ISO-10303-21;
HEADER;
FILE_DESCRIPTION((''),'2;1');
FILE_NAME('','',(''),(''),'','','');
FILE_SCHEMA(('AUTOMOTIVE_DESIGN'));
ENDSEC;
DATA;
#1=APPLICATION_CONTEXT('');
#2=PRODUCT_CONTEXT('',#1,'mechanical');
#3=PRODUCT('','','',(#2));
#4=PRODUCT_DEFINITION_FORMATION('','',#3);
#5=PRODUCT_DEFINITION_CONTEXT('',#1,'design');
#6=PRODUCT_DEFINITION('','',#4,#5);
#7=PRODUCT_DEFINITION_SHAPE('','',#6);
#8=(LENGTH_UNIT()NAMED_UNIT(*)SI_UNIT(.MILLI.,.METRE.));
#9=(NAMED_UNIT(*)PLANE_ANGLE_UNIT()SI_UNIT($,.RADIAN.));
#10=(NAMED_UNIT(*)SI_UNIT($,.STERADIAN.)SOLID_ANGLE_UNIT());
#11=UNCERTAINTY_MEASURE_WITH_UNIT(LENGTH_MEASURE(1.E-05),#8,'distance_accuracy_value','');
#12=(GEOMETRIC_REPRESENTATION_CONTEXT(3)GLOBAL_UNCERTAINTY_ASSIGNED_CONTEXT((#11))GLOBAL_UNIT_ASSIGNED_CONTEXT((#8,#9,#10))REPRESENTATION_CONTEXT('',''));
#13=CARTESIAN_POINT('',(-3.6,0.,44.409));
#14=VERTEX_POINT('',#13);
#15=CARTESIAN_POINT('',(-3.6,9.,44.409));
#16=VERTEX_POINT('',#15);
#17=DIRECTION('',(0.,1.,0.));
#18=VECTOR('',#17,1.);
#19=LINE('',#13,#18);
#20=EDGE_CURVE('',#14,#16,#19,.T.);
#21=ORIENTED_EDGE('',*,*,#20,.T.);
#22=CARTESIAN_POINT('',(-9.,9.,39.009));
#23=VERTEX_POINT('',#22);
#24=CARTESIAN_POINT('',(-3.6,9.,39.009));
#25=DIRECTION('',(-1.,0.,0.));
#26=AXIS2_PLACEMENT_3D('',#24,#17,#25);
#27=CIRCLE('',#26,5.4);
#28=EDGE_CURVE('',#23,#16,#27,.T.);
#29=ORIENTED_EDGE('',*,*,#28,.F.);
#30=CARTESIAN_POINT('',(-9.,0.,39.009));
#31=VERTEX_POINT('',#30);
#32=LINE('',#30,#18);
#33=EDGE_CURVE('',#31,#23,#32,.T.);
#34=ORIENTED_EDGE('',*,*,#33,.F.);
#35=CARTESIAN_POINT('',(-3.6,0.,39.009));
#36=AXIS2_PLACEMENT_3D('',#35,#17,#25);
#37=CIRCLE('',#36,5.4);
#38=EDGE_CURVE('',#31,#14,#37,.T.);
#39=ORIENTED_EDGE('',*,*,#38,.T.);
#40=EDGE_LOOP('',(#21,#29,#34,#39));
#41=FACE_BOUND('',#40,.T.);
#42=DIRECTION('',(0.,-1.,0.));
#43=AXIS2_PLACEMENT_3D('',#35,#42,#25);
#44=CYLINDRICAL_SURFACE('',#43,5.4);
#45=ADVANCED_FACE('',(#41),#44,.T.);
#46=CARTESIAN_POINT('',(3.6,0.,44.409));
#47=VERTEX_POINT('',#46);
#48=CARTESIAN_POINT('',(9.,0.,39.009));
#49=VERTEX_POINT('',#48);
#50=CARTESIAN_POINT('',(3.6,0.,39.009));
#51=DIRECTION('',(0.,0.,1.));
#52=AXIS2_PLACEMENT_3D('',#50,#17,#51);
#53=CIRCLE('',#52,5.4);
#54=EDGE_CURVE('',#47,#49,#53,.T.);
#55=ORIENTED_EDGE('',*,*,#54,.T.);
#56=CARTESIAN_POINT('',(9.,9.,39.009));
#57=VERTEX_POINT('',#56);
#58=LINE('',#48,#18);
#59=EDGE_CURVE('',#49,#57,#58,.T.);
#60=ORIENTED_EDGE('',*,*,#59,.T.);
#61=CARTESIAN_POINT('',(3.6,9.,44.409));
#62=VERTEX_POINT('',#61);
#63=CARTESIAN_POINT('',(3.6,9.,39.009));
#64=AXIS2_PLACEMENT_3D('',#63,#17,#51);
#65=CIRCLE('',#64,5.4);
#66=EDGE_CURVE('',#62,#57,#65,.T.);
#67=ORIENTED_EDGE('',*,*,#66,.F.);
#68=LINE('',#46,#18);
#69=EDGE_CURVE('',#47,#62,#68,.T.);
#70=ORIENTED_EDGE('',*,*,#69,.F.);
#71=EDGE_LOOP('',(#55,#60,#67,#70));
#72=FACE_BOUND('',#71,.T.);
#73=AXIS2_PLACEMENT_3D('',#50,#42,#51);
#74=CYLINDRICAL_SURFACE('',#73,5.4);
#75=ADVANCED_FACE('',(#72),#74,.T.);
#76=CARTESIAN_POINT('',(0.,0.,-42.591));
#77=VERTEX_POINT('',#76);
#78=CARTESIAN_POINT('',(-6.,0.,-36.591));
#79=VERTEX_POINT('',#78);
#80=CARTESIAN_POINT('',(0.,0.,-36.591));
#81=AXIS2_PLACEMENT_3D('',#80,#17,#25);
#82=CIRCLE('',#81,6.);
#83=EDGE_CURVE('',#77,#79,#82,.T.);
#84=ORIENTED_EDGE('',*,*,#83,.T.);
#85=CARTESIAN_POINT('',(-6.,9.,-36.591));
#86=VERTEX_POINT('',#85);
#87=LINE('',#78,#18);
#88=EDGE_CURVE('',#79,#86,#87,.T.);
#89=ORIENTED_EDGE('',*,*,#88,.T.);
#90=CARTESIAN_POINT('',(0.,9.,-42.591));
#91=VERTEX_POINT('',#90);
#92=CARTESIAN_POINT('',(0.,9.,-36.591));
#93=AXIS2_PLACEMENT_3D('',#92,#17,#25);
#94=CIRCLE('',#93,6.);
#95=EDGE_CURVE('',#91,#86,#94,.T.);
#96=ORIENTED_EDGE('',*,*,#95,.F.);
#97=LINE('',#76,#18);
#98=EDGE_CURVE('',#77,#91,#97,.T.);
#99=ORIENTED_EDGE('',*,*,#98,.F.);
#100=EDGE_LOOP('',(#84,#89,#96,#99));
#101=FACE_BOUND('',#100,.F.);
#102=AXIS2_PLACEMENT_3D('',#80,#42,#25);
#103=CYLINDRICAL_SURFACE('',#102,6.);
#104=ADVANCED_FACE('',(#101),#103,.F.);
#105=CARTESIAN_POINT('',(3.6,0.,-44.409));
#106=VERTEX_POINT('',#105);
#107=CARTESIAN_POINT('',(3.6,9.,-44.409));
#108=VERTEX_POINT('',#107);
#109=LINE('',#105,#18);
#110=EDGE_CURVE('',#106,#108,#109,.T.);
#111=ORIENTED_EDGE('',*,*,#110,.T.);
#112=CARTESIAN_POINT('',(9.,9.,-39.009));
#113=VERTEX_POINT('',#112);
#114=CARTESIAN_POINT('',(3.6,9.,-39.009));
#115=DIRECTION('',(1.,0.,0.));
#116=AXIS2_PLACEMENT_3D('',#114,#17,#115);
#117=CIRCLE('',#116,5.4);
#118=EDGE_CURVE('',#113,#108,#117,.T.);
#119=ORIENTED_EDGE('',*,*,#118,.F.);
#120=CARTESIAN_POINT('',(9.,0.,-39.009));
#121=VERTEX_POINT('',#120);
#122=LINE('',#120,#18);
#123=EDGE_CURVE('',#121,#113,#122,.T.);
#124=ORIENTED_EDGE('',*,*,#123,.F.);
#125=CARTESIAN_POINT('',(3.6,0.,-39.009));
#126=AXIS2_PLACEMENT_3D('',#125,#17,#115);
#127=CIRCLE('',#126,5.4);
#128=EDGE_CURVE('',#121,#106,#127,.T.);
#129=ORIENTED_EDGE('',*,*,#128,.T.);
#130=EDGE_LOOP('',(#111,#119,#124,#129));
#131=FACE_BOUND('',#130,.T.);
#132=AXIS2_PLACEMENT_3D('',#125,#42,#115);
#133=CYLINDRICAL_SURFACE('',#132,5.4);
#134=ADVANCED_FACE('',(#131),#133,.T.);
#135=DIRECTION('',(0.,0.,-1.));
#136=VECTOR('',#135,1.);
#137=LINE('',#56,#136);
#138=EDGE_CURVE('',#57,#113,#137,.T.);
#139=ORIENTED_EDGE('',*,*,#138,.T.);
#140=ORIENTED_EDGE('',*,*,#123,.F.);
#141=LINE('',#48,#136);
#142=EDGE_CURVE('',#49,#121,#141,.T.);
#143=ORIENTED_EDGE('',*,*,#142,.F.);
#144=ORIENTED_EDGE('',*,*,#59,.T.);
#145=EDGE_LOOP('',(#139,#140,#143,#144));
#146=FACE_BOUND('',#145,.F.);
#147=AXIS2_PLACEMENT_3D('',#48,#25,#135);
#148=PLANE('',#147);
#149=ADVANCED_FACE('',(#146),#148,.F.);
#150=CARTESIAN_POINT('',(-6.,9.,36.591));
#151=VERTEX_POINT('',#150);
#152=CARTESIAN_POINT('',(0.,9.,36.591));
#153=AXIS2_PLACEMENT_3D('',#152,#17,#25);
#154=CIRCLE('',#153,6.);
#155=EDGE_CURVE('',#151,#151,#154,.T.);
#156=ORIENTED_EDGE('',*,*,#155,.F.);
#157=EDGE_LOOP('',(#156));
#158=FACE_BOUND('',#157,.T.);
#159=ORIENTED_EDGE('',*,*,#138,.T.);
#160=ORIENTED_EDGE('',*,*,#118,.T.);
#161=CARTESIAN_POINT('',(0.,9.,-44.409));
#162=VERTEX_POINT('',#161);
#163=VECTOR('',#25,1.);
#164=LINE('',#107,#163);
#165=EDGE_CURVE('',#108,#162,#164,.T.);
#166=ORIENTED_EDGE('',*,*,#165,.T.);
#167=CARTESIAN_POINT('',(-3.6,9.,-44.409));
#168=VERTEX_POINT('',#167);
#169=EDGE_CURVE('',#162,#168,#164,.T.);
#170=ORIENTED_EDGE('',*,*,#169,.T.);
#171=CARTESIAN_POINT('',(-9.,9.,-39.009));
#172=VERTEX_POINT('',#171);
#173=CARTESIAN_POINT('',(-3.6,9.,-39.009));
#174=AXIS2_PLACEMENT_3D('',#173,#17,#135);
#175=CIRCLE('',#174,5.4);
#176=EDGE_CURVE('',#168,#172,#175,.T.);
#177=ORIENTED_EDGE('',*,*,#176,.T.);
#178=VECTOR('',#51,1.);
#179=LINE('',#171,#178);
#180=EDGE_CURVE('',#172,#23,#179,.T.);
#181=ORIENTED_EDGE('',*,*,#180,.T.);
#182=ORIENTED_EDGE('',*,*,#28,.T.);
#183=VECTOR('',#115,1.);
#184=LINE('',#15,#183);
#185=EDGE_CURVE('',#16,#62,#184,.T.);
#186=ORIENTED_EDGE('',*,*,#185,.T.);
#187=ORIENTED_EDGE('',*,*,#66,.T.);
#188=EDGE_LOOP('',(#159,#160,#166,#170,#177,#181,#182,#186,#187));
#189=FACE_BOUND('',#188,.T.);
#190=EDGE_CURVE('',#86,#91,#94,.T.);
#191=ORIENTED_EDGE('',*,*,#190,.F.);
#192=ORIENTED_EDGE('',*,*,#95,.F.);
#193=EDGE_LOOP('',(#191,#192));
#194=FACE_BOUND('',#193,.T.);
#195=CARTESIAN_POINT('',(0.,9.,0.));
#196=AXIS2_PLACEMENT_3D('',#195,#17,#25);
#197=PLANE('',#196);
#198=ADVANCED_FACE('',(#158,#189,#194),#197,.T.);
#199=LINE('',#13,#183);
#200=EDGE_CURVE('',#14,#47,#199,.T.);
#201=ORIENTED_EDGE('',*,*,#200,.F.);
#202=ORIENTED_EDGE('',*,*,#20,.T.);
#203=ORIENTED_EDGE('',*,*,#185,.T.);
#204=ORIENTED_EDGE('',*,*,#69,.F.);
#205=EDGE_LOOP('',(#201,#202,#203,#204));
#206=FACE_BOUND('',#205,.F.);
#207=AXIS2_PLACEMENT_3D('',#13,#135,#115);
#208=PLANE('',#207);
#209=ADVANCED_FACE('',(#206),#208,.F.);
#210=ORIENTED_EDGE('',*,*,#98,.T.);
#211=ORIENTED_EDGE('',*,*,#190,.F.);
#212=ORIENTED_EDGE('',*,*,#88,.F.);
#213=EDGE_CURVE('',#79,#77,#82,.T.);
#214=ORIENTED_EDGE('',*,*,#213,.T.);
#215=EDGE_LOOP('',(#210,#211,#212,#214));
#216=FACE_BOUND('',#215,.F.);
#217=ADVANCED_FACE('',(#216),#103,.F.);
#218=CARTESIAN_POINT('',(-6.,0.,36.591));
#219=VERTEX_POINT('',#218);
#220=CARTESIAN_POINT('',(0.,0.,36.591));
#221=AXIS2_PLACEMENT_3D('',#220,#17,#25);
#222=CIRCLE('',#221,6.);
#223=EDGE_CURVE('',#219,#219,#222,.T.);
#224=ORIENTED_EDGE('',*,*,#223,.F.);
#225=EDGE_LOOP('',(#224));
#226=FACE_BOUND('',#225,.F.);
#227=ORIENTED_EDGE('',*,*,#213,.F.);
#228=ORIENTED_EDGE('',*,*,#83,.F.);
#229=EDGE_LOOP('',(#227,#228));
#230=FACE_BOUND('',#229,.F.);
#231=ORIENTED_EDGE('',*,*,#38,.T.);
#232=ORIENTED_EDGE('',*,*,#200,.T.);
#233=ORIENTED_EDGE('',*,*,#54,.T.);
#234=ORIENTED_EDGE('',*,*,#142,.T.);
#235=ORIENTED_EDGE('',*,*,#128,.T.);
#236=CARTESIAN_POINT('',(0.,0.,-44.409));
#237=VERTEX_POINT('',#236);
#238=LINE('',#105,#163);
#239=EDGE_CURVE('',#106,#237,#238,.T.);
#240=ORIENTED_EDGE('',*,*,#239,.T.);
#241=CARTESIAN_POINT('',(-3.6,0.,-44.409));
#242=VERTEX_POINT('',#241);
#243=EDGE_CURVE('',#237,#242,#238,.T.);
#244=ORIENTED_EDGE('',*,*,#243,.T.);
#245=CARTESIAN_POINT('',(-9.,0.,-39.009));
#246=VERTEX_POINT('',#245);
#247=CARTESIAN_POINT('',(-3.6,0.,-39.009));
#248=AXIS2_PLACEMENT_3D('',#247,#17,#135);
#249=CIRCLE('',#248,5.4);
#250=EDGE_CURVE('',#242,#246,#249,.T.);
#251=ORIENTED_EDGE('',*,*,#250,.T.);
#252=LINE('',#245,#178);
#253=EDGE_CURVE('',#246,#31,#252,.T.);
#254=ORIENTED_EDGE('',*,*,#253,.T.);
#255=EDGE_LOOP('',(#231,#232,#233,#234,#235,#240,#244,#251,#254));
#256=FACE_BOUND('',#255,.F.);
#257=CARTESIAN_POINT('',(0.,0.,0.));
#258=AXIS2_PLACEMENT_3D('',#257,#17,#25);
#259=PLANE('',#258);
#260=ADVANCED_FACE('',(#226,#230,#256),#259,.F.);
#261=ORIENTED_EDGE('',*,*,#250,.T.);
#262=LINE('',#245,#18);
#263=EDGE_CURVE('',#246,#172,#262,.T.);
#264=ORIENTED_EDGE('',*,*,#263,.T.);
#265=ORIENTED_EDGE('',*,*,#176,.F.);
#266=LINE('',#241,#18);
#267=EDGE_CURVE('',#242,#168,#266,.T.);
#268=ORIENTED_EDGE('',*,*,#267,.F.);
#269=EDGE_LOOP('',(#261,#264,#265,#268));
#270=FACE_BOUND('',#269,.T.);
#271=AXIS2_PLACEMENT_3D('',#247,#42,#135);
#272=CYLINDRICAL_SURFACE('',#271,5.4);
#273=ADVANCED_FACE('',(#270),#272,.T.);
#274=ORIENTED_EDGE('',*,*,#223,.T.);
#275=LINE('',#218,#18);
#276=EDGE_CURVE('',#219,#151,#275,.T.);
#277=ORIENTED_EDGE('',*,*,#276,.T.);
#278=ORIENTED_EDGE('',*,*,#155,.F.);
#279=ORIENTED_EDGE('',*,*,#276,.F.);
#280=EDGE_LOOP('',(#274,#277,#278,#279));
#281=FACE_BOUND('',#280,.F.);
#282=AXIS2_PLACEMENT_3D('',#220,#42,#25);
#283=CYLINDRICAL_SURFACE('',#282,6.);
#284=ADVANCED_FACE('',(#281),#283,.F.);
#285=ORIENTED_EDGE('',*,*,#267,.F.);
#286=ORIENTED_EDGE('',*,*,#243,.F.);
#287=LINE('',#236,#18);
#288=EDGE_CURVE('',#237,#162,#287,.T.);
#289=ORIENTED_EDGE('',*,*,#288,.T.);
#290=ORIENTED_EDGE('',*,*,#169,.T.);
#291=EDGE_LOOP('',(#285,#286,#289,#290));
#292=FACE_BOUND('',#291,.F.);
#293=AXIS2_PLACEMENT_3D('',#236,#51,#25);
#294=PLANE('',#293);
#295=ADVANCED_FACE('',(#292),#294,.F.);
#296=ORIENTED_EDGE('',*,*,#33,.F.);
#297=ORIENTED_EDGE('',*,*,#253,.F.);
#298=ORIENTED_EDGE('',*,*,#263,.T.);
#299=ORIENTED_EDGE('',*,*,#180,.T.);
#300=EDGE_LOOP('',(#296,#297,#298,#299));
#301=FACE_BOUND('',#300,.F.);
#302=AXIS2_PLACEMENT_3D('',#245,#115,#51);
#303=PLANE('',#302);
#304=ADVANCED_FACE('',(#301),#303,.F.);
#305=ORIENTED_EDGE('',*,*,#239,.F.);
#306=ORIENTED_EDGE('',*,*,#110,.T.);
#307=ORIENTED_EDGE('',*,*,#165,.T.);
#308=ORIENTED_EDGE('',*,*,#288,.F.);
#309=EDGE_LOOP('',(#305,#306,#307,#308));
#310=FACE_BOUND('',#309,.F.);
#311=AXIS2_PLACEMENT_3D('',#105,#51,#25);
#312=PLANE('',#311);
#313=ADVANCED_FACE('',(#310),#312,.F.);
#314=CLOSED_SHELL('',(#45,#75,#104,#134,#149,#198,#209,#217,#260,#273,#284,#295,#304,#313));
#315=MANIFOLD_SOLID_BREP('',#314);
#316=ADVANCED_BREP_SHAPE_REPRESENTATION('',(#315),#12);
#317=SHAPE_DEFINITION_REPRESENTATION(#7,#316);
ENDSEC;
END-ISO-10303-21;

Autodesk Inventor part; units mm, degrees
ref_plane "YZ Plane" through (0, 0, 0) normal (1, 0, 0) x (0, 1, 0)
ref_plane "XZ Plane" through (0, 0, 0) normal (0, 1, 0) x (-1, 0, 0)
ref_plane "XY Plane" through (0, 0, 0) normal (0, 0, 1) x (1, 0, 0)
sketch "Sketch1" plane through (0, 0, 0) normal (0, 1, 0) x (-1, 0, 0)
  line L0 (3.6, 44.409) -> (-3.6, 44.409)
  line L1 (-9, 39.009) -> (-9, -39.009)
  line L2 (-3.6, -44.409) -> (3.6, -44.409)
  line L3 (9, -39.009) -> (9, 39.009)
  line L4 (9, 44.409) -> (-9, -44.409) construction
  line L5 (-9, 44.409) -> (9, -44.409) construction
  arc A0 (3.6, -44.409) -> (9, -39.009) centre (3.6, -39.009) ccw
  arc A1 (-9, -39.009) -> (-3.6, -44.409) centre (-3.6, -39.009) ccw
  arc A2 (9, 39.009) -> (3.6, 44.409) centre (3.6, 39.009) ccw
  arc A3 (-3.6, 44.409) -> (-9, 39.009) centre (-3.6, 39.009) ccw
  line L6 (0, -44.409) -> (0, -36.591)
  circle A4 centre (0, -36.591) radius 6
  line L7 (0, 0) -> (1.5436, 0)
  circle A5 centre (0, 36.591) radius 6
  dimension "d0" = 18
  dimension "d1" = 88.818
  dimension "d2" = 5.4
  dimension "d3" = 7.818
  dimension "d4" = 12
extrude "Extrusion1" add sketch "Sketch1" along normal blind 9
properties part number "LegLverr"
